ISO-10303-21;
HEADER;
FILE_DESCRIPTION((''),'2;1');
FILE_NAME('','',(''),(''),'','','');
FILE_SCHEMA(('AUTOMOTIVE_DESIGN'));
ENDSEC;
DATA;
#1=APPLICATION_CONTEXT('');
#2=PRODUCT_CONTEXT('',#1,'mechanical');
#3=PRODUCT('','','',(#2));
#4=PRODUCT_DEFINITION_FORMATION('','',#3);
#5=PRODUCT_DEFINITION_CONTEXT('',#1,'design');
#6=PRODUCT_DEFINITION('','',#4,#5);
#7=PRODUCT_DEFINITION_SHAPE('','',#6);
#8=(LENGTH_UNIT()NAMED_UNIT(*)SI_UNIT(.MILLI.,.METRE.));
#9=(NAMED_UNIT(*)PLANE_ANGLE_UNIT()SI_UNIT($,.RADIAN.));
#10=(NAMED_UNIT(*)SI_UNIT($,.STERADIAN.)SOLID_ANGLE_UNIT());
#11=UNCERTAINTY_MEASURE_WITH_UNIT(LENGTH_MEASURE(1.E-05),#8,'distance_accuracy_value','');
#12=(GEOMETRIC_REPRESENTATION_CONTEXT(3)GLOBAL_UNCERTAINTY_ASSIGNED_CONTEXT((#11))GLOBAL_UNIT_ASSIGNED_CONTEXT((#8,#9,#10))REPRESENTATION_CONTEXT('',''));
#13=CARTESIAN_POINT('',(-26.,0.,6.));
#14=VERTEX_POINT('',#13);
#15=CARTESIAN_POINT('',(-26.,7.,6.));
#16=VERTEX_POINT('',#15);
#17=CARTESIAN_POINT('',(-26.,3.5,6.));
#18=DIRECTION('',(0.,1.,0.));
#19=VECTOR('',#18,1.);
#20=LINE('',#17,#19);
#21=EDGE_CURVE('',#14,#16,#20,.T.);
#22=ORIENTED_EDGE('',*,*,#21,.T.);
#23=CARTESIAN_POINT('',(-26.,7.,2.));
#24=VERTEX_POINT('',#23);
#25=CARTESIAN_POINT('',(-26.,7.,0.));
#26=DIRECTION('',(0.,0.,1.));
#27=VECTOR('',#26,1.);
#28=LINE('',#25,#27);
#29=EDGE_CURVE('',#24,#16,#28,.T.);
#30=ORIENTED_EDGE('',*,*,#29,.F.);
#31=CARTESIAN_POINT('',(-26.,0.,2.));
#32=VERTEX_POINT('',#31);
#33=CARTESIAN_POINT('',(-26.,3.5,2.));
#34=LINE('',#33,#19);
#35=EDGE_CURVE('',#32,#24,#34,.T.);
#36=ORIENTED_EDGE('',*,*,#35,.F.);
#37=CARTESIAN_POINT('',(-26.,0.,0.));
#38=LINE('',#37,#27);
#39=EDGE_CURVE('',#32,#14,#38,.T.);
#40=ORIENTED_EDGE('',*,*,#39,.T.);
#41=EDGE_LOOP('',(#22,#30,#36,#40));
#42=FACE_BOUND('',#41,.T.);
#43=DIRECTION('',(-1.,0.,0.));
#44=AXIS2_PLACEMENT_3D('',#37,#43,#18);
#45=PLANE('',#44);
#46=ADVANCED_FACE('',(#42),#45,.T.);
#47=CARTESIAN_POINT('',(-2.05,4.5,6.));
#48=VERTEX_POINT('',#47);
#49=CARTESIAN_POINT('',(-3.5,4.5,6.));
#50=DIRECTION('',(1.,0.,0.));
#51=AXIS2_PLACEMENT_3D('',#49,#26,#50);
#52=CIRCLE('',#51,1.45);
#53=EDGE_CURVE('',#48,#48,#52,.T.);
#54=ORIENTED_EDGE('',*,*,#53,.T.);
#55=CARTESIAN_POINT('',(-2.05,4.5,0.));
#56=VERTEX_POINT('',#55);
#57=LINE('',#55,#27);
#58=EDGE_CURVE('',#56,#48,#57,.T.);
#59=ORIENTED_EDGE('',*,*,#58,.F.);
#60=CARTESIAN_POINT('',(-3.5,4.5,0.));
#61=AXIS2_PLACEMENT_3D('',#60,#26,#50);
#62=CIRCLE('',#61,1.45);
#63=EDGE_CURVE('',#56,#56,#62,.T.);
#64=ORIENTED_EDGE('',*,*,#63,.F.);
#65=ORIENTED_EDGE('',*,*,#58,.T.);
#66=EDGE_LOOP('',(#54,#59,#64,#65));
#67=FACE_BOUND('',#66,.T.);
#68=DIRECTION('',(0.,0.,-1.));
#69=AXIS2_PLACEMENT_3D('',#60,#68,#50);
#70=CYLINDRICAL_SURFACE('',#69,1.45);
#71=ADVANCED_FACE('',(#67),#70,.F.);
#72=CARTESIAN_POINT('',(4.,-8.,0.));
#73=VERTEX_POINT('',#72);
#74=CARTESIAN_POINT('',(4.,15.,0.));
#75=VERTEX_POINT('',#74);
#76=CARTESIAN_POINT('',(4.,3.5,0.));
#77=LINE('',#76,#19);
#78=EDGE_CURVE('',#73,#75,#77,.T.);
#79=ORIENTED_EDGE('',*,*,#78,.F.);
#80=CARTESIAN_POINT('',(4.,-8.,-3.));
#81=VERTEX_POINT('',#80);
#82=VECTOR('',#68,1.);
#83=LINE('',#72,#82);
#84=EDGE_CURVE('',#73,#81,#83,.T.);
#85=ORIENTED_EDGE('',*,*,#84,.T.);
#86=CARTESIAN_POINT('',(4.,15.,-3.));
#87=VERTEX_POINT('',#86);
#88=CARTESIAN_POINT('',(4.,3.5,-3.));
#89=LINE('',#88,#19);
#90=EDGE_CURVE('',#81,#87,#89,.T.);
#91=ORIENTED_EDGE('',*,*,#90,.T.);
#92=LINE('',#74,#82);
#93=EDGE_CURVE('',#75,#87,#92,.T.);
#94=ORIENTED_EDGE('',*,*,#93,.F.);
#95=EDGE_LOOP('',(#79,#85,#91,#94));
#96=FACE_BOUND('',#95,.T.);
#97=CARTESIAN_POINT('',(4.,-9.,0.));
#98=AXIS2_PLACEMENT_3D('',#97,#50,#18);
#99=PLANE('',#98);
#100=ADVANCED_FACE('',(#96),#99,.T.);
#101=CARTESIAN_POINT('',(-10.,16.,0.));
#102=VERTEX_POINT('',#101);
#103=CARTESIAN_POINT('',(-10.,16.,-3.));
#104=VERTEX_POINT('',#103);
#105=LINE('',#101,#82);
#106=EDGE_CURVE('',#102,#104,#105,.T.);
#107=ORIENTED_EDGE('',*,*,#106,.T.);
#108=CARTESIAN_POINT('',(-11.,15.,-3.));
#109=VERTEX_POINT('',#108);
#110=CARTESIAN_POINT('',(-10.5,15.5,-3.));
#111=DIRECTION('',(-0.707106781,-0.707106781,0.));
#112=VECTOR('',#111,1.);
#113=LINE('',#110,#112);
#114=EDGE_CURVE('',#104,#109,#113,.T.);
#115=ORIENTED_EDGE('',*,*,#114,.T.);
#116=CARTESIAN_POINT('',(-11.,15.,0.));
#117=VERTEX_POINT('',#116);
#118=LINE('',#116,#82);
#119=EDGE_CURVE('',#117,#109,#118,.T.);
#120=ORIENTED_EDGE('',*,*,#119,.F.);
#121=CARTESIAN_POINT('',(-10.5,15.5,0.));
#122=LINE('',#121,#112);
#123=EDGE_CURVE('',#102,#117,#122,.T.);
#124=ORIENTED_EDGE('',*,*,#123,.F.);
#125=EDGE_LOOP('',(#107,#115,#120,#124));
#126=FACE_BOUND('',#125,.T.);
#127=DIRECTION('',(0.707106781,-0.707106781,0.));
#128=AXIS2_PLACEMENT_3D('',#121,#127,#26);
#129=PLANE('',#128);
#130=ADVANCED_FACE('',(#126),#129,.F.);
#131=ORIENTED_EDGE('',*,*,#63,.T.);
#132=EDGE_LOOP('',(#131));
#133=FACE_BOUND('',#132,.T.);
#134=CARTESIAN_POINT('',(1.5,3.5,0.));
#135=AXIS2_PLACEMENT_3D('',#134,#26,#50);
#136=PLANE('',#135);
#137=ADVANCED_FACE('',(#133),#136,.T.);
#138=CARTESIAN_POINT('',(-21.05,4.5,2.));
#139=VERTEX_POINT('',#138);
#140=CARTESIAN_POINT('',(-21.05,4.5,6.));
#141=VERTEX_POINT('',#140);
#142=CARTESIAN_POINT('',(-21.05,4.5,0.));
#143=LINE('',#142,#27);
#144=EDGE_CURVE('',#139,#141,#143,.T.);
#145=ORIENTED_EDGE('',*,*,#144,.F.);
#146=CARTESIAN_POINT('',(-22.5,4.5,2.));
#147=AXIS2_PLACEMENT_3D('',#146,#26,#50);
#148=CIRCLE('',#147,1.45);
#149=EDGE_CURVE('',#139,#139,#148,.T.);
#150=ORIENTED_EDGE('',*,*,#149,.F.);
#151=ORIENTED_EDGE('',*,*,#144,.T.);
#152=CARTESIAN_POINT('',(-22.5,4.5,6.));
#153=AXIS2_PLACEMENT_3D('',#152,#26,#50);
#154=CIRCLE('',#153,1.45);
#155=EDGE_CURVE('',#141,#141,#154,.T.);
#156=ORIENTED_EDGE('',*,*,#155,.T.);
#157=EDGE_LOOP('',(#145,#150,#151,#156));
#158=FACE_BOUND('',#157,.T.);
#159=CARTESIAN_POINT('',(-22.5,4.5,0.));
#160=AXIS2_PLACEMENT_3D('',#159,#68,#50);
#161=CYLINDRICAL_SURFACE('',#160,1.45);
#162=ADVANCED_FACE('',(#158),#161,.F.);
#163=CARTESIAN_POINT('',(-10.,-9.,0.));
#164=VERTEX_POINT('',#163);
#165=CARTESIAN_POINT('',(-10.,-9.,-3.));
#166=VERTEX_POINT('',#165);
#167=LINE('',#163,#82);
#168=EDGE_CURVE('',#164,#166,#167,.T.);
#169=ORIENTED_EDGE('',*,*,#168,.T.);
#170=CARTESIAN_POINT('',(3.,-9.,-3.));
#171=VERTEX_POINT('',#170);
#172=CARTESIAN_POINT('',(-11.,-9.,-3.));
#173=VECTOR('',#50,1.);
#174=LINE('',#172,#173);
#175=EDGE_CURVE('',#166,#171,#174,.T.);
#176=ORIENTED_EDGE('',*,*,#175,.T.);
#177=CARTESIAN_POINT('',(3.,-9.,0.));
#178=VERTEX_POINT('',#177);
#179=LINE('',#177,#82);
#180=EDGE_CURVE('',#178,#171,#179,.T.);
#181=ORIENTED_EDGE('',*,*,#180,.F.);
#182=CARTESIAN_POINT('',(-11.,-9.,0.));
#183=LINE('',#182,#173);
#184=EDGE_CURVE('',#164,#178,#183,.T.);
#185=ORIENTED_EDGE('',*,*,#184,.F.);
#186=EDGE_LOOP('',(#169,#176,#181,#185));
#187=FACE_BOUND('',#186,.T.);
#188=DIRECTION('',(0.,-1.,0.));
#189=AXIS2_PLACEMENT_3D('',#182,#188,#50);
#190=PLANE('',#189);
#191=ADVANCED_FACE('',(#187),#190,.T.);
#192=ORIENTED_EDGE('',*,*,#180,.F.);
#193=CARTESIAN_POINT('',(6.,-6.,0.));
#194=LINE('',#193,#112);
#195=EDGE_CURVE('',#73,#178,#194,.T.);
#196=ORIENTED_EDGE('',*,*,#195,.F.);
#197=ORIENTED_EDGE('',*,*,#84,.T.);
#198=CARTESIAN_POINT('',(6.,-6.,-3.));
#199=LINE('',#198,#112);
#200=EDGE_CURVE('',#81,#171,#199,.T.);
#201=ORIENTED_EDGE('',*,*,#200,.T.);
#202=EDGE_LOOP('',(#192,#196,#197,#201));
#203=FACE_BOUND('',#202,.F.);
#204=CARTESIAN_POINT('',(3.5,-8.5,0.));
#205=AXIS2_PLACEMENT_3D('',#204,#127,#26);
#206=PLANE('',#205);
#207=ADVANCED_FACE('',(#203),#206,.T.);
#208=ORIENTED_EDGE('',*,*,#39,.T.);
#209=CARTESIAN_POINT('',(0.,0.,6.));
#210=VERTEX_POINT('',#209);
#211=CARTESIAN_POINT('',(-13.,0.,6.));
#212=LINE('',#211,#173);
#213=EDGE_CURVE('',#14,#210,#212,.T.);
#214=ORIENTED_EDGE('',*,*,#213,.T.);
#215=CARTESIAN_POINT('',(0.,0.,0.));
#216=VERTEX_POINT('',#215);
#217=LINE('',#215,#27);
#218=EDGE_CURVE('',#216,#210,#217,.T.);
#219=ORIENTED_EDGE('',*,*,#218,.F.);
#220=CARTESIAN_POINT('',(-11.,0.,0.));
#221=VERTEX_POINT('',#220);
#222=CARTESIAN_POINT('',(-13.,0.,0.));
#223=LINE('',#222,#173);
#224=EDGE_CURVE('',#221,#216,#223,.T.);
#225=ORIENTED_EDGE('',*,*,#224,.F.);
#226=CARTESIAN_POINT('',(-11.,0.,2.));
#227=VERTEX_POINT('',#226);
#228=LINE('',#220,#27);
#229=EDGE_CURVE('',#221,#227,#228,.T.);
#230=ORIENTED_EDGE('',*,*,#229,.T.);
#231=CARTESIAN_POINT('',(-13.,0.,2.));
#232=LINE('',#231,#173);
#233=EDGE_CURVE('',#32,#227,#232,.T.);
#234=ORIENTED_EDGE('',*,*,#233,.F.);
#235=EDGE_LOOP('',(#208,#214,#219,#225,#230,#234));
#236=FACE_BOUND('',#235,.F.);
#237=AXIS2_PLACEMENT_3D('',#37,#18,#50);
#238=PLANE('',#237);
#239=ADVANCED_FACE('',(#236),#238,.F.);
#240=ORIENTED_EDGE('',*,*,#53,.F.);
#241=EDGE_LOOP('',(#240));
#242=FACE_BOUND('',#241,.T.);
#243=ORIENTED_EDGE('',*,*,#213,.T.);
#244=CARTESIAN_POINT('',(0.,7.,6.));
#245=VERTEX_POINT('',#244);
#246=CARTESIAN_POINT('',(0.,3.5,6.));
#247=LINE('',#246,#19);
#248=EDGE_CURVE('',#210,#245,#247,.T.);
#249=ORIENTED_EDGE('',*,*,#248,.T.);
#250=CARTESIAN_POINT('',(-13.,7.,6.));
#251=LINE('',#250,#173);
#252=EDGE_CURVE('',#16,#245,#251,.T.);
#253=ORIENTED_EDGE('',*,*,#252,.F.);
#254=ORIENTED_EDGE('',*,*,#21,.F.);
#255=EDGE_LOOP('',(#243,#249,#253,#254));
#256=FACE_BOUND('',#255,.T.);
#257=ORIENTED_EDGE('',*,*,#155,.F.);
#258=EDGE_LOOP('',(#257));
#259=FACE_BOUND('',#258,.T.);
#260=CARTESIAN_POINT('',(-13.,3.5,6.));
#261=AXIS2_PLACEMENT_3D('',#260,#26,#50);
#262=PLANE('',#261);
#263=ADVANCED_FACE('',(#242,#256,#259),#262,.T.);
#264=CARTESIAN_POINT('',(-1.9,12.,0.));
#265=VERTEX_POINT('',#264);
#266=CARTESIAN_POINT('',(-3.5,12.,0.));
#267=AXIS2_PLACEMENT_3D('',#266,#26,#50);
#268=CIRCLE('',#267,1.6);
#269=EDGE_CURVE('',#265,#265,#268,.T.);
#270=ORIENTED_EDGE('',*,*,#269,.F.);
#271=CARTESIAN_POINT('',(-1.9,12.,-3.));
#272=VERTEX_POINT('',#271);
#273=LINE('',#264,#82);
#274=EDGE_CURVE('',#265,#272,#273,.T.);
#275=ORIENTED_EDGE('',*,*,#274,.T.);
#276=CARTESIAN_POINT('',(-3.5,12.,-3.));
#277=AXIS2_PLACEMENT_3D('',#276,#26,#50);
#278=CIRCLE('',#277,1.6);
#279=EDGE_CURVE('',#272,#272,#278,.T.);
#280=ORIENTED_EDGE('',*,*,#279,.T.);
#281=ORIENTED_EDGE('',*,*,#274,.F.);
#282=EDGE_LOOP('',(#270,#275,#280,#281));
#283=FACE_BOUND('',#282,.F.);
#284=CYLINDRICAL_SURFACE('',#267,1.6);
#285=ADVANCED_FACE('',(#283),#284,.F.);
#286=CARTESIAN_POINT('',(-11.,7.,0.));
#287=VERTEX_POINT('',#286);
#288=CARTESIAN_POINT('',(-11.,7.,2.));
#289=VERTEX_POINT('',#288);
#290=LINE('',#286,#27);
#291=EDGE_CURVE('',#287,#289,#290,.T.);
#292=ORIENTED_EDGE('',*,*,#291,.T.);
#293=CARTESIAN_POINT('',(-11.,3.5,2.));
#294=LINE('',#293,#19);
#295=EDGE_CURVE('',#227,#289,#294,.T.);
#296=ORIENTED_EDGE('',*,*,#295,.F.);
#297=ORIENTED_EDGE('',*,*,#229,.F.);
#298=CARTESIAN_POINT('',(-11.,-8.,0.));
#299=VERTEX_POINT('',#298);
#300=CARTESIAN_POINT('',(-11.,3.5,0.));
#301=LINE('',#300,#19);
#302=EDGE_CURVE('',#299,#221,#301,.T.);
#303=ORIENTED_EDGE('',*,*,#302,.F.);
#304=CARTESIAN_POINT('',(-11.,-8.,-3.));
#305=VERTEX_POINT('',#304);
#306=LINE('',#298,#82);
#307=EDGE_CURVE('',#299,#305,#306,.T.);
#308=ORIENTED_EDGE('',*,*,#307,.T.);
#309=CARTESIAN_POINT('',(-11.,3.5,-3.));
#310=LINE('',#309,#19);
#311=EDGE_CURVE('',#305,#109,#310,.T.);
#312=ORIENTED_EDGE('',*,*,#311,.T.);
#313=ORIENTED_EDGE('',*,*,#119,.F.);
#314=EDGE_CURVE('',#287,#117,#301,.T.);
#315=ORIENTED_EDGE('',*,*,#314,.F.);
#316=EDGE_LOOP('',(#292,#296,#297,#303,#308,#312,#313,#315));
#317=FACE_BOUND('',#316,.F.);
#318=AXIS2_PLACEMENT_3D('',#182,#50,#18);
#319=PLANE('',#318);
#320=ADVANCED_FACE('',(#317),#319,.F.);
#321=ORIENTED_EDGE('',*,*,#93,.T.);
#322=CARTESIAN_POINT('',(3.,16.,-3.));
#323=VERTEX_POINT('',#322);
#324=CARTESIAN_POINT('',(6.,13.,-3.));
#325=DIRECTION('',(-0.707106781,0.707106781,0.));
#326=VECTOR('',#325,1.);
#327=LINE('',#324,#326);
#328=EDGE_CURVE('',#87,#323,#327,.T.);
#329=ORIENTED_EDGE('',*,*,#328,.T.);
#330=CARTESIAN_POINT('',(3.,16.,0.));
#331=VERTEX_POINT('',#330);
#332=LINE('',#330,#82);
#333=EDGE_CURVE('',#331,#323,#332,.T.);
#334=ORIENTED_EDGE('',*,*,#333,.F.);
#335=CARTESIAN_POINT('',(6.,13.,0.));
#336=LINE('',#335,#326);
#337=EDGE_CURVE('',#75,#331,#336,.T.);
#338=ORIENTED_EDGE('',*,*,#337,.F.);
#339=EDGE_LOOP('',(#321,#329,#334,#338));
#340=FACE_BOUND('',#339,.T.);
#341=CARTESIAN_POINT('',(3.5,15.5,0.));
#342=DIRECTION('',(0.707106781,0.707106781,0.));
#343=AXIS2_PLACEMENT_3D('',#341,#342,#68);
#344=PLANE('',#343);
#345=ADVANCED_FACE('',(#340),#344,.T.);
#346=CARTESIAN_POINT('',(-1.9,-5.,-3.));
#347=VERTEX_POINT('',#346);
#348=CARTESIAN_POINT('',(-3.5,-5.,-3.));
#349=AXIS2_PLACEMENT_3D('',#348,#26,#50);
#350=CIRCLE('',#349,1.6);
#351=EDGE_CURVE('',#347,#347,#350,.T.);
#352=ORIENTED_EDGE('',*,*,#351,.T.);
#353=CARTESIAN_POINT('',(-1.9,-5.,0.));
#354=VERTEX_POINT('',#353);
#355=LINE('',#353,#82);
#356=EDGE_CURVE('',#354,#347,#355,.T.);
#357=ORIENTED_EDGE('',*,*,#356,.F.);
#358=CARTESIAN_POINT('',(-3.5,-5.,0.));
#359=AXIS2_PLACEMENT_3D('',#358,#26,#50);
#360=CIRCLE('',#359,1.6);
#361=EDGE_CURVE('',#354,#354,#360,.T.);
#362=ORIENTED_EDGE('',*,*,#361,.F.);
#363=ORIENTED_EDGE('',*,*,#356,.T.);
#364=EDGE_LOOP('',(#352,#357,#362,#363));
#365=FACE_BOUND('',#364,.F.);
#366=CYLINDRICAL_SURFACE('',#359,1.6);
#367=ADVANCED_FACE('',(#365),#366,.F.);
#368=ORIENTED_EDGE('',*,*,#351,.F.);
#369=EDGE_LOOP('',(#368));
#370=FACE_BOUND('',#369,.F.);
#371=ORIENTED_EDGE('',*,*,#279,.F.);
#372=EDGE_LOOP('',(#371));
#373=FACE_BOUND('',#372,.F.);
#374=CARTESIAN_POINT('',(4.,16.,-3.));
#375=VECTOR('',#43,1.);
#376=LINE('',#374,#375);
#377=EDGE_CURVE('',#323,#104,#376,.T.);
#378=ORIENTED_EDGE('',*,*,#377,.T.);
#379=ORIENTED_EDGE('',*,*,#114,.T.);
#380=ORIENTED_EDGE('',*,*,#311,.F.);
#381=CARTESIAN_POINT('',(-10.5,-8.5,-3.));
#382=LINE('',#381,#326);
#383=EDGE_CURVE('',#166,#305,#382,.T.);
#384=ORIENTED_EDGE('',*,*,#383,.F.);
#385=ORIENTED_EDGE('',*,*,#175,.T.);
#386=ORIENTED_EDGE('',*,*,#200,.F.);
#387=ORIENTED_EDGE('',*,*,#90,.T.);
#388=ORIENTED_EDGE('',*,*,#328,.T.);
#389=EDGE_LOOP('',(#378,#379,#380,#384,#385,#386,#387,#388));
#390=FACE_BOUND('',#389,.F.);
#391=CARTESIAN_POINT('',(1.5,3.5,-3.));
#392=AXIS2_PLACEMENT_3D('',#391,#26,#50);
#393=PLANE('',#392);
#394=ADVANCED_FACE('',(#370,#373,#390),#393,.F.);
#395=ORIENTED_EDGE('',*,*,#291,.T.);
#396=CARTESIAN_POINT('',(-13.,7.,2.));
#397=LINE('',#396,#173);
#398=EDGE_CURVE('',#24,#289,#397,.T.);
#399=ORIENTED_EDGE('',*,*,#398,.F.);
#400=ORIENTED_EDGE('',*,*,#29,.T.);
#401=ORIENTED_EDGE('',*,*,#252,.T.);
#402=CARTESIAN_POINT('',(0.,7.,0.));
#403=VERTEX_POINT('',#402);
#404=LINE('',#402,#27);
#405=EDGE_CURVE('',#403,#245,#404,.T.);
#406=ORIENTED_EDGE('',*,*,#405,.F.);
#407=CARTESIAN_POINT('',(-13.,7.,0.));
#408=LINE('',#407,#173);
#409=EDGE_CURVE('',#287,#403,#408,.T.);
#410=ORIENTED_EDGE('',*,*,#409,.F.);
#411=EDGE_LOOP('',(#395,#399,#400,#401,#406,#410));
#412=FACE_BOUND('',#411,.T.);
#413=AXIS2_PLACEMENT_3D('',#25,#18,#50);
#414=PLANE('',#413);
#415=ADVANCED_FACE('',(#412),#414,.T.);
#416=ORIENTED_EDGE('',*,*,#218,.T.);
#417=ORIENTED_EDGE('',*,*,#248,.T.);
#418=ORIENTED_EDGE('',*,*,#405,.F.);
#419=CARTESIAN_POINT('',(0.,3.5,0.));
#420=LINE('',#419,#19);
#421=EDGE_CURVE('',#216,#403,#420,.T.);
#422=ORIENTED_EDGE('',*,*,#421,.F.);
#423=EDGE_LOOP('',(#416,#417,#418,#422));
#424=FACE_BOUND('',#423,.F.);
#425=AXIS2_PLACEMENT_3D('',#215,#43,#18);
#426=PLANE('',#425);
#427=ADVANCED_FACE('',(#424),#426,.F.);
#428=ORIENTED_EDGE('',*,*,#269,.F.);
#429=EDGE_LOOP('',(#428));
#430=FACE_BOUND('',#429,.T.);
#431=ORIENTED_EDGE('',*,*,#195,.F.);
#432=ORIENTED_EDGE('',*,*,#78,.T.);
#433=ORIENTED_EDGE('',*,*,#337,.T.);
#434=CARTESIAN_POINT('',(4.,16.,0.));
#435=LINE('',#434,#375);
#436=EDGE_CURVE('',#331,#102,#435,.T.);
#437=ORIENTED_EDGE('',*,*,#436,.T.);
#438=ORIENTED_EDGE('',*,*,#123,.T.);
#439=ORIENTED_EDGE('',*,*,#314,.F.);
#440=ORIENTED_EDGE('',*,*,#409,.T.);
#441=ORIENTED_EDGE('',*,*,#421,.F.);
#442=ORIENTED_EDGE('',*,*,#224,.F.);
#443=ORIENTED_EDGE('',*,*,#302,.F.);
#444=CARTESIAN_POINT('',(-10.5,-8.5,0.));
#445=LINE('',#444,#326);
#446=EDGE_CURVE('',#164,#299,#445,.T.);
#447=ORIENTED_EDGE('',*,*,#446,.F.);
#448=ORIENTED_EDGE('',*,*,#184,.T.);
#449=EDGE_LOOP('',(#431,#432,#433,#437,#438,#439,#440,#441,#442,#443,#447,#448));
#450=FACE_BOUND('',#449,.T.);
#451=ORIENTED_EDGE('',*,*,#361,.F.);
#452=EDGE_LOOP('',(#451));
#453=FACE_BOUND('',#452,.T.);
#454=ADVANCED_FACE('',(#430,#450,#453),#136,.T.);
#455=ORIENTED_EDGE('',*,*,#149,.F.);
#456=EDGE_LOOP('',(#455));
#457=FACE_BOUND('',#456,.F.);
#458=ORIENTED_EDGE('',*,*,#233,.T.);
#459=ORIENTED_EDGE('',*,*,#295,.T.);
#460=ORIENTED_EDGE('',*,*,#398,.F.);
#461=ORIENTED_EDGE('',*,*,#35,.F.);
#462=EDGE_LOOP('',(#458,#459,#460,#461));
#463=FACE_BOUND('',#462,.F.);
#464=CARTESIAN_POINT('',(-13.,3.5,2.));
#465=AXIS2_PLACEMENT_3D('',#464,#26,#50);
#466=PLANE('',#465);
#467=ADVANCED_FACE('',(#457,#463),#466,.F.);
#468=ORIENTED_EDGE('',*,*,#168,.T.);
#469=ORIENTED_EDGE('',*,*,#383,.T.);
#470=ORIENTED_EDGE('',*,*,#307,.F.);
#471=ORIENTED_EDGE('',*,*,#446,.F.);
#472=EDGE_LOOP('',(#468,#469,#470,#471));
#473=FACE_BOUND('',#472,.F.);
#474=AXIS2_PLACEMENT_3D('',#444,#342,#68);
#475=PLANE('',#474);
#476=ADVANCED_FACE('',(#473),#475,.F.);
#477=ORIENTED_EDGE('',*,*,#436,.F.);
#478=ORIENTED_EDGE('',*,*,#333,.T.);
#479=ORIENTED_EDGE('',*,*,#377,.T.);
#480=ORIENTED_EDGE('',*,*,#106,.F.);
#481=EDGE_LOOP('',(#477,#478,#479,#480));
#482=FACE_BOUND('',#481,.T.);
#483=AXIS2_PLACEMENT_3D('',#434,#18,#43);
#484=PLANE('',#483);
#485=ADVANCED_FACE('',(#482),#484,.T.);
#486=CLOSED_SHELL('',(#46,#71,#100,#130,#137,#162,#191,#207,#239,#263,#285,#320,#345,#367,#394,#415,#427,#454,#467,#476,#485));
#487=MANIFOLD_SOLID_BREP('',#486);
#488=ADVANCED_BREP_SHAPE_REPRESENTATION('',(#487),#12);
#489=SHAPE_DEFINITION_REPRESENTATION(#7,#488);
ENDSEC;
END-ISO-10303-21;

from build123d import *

# Parameters (mm, degrees)
F0_W     = 26
F0_H     = 7
F0_R     = 1.45
F1_DEPTH = 6
F2_W     = 5
F2_H     = 25
F2_R     = 1.6
F3_DEPTH = 3
F4_SIZE  = 1
F6_DEPTH = 2


# Not quite as in the source:
# - a feature of the source that left no trace in its solid (it failed there, or was rolled back) is left out


with BuildPart() as f1:
    # F0 (on Top) → F1 (new body)
    with BuildSketch(Plane.XY):
        with Locations((-13, 3.5)):
            Rectangle(F0_W, F0_H)
        with Locations((-22.5, 4.5)):
            Circle(F0_R, mode=Mode.SUBTRACT)
        with Locations((-3.5, 4.5)):
            Circle(F0_R, mode=Mode.SUBTRACT)
    extrude(amount=F1_DEPTH)

    # F2 (on Top) → F3 (join)
    with BuildSketch(Plane.XY):
        with Locations((1.5, 3.5)):
            Rectangle(F2_W, F2_H)
        with Locations((-3.5, 3.5)):
            Rectangle(F2_W, F2_H)
        with Locations((-3.5, -5)):
            Circle(F2_R, mode=Mode.SUBTRACT)
        with Locations((-3.5, 12)):
            Circle(F2_R, mode=Mode.SUBTRACT)
        with Locations((-8.5, 3.5)):
            Rectangle(F2_W, F2_H)
    extrude(amount=-F3_DEPTH)

    # F4
    f4_edges = [f1.edges().sort_by_distance(p)[0] for p in [
        (4, 16, -1.5),
        (-11, 16, -1.5),
        (4, -9, -1.5),
        (-11, -9, -1.5),
    ]]
    chamfer(f4_edges, length=F4_SIZE)

    # F6 (cut): a face of the model
    f6_faces = [f1.faces().sort_by_distance(p)[0] for p in [
        (-18.2314818077, 3.4328704519, 0),
    ]]
    extrude(f6_faces, amount=-F6_DEPTH, mode=Mode.SUBTRACT)


solid = f1.part
